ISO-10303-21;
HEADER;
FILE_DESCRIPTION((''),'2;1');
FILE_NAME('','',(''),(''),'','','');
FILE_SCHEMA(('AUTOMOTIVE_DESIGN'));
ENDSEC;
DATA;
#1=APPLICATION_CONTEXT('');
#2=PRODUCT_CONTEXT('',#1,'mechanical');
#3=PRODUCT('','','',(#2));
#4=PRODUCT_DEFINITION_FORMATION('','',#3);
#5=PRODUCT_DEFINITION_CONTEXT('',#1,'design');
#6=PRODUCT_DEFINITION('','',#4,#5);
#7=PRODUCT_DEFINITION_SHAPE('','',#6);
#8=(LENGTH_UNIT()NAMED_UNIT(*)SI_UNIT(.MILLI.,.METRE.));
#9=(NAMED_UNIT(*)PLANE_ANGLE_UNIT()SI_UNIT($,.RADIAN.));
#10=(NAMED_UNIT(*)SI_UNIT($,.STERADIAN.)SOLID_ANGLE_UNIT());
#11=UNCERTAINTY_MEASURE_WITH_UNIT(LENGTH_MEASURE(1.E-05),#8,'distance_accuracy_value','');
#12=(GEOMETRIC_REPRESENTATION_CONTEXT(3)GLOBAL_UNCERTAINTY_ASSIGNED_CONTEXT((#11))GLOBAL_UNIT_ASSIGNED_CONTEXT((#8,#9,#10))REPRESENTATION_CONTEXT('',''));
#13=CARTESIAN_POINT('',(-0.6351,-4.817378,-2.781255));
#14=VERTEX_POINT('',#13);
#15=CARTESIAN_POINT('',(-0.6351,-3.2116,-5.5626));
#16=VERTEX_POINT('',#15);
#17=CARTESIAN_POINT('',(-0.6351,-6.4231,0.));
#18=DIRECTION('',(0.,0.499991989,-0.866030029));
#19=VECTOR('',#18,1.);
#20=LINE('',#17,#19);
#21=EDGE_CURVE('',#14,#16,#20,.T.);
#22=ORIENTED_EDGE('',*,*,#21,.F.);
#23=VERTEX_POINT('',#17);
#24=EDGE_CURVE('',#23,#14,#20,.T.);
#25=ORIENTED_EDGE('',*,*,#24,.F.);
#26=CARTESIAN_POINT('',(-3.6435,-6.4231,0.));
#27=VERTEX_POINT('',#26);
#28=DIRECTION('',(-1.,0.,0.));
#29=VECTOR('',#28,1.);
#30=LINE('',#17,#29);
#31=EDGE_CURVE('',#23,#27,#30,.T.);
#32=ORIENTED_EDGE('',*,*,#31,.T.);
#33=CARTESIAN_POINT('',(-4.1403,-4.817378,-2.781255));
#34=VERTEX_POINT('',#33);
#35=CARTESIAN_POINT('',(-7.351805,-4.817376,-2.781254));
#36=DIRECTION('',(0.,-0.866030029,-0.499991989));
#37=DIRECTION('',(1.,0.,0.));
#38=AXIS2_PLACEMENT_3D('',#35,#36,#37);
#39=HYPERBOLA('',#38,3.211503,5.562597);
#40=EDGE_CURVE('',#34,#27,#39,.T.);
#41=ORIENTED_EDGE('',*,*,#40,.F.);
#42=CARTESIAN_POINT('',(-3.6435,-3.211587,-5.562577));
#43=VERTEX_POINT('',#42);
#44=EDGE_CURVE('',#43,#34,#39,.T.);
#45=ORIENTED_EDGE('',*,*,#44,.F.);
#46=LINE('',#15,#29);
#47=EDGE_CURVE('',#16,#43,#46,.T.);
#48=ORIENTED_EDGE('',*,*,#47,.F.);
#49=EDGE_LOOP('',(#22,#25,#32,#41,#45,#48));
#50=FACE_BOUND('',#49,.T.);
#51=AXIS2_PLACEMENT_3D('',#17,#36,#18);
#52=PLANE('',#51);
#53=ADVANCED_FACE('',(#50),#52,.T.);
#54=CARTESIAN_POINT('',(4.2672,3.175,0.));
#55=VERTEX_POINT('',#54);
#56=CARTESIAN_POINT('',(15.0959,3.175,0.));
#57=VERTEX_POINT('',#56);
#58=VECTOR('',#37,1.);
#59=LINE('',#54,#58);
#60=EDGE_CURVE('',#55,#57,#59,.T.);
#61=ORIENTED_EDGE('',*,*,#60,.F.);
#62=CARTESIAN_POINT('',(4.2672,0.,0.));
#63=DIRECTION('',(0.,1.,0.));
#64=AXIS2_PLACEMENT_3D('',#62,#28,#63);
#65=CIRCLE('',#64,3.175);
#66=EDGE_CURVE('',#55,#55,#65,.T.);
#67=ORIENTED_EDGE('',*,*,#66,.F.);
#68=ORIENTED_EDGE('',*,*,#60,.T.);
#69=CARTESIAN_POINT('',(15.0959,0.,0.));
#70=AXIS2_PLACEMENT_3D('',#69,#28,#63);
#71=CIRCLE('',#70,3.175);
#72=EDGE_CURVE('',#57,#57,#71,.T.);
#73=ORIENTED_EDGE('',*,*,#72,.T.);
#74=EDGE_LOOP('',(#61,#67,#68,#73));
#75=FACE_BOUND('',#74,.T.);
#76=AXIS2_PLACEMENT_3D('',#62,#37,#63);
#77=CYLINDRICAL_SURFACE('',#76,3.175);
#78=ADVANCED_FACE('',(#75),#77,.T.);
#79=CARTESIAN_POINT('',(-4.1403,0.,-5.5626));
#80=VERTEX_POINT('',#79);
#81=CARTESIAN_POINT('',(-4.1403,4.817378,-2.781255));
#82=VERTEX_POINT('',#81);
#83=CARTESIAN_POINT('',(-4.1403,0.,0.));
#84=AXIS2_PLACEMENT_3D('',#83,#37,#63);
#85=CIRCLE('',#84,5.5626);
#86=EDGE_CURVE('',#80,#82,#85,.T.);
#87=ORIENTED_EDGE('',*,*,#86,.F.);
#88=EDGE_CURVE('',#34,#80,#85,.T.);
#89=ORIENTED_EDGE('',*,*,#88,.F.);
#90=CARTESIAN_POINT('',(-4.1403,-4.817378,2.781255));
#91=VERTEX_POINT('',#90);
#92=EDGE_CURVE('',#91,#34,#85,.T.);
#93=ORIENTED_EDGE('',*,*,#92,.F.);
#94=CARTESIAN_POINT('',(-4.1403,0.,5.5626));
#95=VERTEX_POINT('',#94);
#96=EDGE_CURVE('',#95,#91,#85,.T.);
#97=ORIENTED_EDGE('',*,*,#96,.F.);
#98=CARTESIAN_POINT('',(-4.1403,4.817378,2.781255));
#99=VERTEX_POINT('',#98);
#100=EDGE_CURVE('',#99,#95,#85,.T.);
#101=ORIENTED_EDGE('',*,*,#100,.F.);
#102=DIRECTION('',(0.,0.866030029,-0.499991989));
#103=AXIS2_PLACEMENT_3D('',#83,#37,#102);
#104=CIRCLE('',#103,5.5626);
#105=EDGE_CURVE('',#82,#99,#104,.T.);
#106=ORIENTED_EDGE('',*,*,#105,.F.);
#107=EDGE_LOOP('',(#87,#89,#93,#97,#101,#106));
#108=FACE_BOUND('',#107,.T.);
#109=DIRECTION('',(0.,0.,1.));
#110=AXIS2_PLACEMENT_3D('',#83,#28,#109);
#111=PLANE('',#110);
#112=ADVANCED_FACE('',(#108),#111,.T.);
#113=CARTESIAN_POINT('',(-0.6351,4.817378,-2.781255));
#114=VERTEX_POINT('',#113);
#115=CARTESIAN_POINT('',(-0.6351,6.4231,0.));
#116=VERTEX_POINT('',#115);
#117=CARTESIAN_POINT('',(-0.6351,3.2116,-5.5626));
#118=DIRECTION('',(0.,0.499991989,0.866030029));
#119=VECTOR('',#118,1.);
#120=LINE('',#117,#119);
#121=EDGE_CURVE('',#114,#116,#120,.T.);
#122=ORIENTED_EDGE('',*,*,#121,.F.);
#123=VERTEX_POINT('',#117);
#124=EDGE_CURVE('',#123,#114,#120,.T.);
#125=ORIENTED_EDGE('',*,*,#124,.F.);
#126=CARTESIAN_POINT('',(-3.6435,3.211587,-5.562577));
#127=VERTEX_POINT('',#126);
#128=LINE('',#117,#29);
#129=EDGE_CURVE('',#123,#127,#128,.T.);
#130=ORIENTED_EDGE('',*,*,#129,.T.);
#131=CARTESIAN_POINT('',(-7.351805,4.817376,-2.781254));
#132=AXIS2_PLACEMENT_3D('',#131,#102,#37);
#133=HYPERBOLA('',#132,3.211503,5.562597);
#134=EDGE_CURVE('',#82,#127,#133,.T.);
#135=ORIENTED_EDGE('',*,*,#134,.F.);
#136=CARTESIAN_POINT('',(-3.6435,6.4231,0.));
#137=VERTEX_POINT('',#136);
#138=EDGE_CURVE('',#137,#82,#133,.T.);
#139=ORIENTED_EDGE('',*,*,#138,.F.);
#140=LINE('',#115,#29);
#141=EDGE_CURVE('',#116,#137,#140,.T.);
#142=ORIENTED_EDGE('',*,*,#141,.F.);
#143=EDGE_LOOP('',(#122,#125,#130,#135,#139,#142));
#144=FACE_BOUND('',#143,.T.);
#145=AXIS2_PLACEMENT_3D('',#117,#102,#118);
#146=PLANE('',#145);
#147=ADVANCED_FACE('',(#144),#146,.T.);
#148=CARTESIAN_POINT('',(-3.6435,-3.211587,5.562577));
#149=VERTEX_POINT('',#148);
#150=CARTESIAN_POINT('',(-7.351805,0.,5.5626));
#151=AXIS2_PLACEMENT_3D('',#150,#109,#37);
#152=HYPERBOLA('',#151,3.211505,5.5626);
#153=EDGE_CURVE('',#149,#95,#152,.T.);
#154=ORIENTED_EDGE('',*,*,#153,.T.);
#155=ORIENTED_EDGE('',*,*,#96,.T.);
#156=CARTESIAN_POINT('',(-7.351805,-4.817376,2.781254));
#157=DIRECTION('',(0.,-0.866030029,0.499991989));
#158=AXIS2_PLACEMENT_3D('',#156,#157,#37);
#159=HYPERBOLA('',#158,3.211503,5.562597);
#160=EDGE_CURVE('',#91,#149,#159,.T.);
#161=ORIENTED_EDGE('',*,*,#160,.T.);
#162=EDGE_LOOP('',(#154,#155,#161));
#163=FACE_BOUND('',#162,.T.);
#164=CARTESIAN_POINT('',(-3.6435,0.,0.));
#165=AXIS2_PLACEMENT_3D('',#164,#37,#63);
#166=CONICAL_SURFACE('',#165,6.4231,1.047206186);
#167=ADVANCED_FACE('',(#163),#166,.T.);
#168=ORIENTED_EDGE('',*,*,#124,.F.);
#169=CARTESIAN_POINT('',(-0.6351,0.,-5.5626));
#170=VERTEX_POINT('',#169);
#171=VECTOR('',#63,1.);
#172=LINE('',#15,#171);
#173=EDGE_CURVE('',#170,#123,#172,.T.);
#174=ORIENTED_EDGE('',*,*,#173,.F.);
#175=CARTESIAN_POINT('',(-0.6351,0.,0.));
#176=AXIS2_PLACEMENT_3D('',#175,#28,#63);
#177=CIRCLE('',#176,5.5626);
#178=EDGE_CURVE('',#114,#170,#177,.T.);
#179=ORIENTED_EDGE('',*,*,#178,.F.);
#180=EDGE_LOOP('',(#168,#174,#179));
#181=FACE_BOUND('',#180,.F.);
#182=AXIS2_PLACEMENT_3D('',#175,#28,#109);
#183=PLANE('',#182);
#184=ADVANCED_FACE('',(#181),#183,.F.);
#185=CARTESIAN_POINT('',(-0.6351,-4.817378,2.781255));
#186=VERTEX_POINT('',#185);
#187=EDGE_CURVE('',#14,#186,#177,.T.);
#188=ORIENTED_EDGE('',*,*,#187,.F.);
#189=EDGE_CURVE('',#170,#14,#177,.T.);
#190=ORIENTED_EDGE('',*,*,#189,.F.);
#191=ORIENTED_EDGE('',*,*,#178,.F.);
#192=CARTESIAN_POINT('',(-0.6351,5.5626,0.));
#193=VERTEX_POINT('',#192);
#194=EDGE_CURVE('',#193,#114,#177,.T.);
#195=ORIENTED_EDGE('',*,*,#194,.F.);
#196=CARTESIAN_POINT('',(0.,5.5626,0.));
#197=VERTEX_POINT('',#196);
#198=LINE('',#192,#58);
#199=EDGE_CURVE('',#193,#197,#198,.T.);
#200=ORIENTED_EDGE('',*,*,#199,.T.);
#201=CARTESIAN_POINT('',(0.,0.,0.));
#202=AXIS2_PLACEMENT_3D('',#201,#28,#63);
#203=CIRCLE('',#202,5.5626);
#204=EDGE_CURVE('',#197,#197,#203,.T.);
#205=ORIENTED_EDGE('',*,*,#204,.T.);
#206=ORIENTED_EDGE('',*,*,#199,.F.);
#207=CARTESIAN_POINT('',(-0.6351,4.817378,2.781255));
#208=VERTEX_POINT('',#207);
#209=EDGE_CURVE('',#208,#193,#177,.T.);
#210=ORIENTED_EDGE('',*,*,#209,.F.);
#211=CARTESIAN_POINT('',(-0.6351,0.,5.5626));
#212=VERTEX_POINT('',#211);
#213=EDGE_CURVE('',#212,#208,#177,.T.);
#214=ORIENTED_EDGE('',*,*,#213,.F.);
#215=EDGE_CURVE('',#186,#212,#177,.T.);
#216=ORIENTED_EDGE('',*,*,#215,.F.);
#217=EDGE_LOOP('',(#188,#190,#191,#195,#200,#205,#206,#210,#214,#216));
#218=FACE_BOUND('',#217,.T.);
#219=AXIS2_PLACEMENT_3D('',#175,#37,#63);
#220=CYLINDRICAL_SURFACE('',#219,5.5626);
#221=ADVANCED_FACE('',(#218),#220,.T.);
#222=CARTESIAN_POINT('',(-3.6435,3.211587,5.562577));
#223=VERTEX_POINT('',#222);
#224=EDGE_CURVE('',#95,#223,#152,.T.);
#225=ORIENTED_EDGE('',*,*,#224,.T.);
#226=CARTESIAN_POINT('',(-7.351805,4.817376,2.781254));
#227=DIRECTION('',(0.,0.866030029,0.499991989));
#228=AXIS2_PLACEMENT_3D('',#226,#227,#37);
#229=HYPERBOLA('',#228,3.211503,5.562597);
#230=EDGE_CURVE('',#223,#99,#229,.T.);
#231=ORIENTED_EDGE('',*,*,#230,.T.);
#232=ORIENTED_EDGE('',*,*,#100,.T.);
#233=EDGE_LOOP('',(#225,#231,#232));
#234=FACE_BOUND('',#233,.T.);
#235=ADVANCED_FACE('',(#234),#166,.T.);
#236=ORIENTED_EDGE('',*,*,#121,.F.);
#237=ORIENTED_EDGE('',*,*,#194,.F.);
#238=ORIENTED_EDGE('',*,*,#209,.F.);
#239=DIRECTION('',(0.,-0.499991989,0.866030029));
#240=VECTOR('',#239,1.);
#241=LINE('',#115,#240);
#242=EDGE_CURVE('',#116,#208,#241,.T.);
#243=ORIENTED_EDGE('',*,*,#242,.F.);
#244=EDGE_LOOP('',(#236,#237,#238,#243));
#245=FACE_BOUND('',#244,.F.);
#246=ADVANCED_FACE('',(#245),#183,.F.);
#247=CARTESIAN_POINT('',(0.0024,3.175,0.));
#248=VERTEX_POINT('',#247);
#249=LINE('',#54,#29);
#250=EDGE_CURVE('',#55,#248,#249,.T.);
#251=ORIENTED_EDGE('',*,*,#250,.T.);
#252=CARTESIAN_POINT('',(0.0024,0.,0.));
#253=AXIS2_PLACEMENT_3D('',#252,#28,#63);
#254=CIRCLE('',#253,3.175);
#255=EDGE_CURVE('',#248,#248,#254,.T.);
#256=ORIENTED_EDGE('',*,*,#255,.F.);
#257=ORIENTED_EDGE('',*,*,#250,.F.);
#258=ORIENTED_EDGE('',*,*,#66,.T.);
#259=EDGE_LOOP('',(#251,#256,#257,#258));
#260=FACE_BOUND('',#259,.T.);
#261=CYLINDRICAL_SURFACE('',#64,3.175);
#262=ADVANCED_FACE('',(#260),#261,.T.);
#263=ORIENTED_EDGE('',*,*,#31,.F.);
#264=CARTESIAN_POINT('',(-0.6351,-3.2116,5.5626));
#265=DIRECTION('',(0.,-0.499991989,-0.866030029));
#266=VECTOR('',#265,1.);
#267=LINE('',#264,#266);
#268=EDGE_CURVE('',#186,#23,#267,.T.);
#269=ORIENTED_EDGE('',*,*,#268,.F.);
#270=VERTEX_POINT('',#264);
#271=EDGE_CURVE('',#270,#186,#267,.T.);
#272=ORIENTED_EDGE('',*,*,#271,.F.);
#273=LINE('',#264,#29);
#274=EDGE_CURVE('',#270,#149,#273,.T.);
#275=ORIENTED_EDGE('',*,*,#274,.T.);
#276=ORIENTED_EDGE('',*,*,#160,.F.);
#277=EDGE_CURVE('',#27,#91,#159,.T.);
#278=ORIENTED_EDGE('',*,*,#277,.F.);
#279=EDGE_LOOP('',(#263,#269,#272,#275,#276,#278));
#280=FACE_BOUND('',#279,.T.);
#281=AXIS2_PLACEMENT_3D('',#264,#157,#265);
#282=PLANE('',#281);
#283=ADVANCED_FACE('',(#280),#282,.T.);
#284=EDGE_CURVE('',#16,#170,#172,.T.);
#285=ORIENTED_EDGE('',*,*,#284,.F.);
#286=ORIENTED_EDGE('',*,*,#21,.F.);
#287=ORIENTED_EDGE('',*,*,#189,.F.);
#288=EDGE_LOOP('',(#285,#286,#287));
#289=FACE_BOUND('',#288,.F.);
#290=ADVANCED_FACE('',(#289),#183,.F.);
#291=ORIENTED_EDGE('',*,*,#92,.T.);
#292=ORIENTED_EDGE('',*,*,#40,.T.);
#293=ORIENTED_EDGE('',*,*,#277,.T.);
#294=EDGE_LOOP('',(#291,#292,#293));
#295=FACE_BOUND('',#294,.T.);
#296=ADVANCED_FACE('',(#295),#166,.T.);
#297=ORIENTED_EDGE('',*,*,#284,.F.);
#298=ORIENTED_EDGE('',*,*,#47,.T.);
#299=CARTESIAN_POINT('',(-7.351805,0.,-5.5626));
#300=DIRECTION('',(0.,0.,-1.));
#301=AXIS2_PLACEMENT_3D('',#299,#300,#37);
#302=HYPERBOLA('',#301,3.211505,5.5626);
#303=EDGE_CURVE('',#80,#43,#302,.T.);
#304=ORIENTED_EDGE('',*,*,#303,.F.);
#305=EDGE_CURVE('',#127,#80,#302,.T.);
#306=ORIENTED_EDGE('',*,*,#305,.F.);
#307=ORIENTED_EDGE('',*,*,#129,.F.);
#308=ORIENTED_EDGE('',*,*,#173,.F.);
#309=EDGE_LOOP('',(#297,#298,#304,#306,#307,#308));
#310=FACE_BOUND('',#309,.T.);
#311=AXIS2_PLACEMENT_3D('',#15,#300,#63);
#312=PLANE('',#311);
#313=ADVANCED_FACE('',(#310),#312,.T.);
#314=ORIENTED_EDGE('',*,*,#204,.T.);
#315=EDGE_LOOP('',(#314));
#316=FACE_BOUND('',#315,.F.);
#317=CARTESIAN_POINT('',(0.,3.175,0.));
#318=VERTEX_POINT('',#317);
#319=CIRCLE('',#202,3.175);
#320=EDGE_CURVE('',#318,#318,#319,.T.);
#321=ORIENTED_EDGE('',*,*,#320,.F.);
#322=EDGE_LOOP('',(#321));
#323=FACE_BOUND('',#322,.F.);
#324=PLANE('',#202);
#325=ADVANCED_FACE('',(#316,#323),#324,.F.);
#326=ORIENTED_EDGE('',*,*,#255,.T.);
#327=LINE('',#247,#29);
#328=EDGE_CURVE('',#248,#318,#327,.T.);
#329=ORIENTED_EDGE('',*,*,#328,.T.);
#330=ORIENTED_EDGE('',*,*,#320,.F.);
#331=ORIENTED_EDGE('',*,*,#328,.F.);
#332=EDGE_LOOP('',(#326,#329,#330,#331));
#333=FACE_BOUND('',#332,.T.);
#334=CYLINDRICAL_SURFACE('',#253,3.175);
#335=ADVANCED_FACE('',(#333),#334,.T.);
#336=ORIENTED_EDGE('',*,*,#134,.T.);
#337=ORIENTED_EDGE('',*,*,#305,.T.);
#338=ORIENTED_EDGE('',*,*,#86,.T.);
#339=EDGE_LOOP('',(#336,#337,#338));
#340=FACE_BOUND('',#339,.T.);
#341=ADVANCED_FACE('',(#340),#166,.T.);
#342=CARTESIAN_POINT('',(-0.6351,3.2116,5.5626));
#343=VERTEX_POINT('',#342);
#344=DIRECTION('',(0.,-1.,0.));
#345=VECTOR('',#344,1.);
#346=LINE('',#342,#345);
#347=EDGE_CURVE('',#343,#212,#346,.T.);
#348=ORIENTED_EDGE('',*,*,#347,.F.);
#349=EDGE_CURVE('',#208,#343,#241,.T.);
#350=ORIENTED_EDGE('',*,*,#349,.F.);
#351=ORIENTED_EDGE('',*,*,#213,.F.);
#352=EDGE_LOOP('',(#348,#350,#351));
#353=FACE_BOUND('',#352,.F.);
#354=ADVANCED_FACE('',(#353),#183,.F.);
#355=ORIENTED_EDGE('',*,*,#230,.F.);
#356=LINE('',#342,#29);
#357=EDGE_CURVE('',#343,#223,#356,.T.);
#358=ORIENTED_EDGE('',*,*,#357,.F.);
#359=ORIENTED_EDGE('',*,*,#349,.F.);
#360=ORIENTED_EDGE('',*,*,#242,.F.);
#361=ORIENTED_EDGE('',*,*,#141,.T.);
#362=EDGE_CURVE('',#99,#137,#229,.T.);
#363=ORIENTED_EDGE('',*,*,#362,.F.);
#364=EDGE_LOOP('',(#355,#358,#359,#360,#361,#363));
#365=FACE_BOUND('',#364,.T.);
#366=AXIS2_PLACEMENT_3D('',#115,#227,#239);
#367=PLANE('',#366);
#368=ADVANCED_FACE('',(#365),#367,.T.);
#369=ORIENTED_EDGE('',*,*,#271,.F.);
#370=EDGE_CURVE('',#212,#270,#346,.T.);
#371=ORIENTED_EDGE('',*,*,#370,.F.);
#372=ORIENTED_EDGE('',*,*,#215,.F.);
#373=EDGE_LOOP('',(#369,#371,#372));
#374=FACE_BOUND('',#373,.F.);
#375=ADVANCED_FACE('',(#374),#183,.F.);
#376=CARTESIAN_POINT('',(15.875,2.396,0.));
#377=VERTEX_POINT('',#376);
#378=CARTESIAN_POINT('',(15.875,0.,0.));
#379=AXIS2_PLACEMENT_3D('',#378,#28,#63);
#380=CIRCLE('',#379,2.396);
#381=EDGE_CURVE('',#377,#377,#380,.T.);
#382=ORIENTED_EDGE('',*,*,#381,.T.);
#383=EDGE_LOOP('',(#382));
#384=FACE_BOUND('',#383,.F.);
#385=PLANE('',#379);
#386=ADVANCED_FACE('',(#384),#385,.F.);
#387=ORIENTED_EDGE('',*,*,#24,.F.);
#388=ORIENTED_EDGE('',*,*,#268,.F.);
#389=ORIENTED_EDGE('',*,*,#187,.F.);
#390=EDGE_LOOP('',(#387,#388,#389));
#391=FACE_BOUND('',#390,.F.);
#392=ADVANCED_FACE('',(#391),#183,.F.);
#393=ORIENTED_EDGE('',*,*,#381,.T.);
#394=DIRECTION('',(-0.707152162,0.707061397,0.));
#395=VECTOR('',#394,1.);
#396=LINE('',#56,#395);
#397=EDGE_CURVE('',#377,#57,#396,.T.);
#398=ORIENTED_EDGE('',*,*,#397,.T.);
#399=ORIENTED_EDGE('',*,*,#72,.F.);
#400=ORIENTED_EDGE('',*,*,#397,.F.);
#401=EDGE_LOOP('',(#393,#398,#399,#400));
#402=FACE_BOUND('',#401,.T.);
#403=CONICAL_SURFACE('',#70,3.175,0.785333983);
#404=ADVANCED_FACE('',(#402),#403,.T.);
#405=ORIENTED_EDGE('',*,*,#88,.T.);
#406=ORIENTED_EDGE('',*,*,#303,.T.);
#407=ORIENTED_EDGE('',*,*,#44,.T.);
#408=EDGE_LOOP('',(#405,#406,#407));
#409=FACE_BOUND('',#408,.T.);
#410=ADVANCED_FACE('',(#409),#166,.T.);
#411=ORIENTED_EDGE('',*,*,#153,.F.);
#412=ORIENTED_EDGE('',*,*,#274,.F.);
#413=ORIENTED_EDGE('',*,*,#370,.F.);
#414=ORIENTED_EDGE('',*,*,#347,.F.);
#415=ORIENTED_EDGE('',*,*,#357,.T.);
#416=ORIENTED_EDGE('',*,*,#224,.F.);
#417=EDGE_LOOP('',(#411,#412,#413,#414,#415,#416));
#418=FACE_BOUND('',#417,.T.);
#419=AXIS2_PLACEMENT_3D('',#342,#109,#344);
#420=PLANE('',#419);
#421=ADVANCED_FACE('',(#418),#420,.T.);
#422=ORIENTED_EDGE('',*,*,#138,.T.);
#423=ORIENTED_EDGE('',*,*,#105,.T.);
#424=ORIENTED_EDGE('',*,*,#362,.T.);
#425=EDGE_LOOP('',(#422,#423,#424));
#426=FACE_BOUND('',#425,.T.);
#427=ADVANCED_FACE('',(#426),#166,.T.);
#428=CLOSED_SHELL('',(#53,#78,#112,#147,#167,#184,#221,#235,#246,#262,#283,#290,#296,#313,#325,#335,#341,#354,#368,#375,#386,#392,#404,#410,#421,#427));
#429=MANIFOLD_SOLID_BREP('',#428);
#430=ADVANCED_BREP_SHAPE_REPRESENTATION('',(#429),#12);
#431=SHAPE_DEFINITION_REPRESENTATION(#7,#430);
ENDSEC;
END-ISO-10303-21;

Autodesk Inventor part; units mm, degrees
ref_plane "YZ Plane" through (0, 0, 0) normal (1, 0, 0) x (0, 1, 0)
ref_plane "XZ Plane" through (0, 0, 0) normal (0, 1, 0) x (-1, 0, 0)
sketch "Sketch1" plane through (0, 0, 0) normal (0, 0, 1) x (1, 0, 0)
  line L0 (0, 5.5626) -> (0, 3.175)
  line L1 (4.2672, 3.175) -> (15.875, 3.175)
  line L2 (15.875, 3.175) -> (15.875, 0)
  line L3 (15.875, 0) -> (-0.6351, 0)
  line L4 (-3.9371, 0) -> (19.177, 0) projected
  line L5 (-0.6351, 0) -> (-0.6351, 5.5626)
  line L6 (-0.6351, 5.5626) -> (0, 5.5626)
  line L7 (4.2672, 3.175) -> (0.0024, 3.175)
  line L8 (0.0024, 3.175) -> (0, 3.175)
  line L9 (0, -1.1125) -> (0, 6.6751) projected
  dimension "d0" = 15.875
  dimension "d1" = 11.6078
  dimension "d2" = 6.35
  dimension "d9" = 0.6351
  dimension "d10" = 11.1252
  dimension "d13" = 4.2648
  dimension "d14" = 6.35
revolve "Body" add sketch "Sketch1" angle 360 about axis through (15.875, 0, 0) along (-1, 0, 0)
sketch "Sketch2" plane through (-0.6351, 0, 0) normal (-1, 0, 0) x (0, 0, 1)
  line L0 (0, 6.4231) -> (5.5626, 3.2116)
  line L1 (5.5626, 3.2116) -> (5.5626, -3.2116)
  line L2 (5.5626, -3.2116) -> (0, -6.4231)
  line L3 (0, -6.4231) -> (-5.5626, -3.2116)
  line L4 (-5.5626, -3.2116) -> (-5.5626, 3.2116)
  line L5 (-5.5626, 3.2116) -> (0, 6.4231)
  point P0 (0, 0)
  point P1 (0, 0)
  dimension "d11" = 11.1252
extrude "Head" add sketch "Sketch2" along normal blind 3.5052
sketch "Sketch4" plane through (0, 0, 0) normal (0, 0, 1) x (1, 0, 0)
  line L0 (-4.1403, 5.5626) -> (-4.1403, 6.4231)
  line L1 (-4.1403, 6.4231) -> (-3.6435, 6.4231)
  line L2 (-3.6435, 6.4231) -> (-4.1403, 5.5626)
  line L3 (-4.8413, 0) -> (0.0659, 0) projected
  line L4 (-0.6351, 6.4231) -> (-4.1403, 6.4231) projected
  line L5 (-4.1403, 3.2116) -> (-4.1403, 6.4231) projected
  dimension "d5" = 30
  dimension "d19" = 11.1252
revolve "Chamfer1" cut sketch "Sketch4" angle 360 about axis through (-10, 0, 0) along (1, 0, 0)
thread "Thread" size "1/4-20 UNC" class "2A" standard "ANSI Unified Screw Threads" length 11.6078
chamfer "Chamfer2" distance 0.779 distance2 0.7791 1 edges at (15.875, -3.175, 0) measured on face at (15.875, -0.7017, 0.0433)
ref_plane "Work Plane1" through (1.525, 0, 0) normal (0, 0, 1) x (1, 0, 0)
equation "\"d0\" = NLG"
equation "\"d1\" = GEL"
equation "\"d2\" = GD"
equation "\"d10\" = SD2"
equation "\"d14\" = BDM"
equation "\"d11\" = SW"
equation "\"d3\" = KOH - SD"
equation "\"d5\" = ANG1"
equation "\"d19\" = SW0"
equation "\"d15\" = GEL"
equation "\"d6\" = -0.5 * SPD + 0.5 * GD"
equation "\"NLG\" = 15.875"
equation "\"GD\" = 6.35"
equation "\"BDM\" = 6.35"
equation "\"KOH\" = 4.1402"
equation "\"GEL\" = 11.6078"
equation "\"SW\" = 11.1252"
equation "\"SW0\" = SW"
equation "\"SPD\" = GD1"
equation "\"SD2\" = SW"
equation "\"SD\" = 0.635"
equation "\"ANG1\" = 30deg"
equation "\"GAL\" = 4.26466"
equation "\"GUL\" = 0.77902"
equation "\"RR\" = 0.381"
equation "\"WFT\" = SD"
equation "\"GD1\" = 4.79196"
equation "\"THREADDIA\" = 6.35"
equation "\"SDH\" = SW"
equation "\"SDHG\" = 0.00254"
equation "\"TOA\" = 30deg"
equation "\"FAWI\" = 45deg"
equation "\"NND\" = 6.35"
equation "\"E0\" = 12.84961"
properties part number "AS 2465 - 1/4 x 5/8  UNC" material "Steel, Mild"
